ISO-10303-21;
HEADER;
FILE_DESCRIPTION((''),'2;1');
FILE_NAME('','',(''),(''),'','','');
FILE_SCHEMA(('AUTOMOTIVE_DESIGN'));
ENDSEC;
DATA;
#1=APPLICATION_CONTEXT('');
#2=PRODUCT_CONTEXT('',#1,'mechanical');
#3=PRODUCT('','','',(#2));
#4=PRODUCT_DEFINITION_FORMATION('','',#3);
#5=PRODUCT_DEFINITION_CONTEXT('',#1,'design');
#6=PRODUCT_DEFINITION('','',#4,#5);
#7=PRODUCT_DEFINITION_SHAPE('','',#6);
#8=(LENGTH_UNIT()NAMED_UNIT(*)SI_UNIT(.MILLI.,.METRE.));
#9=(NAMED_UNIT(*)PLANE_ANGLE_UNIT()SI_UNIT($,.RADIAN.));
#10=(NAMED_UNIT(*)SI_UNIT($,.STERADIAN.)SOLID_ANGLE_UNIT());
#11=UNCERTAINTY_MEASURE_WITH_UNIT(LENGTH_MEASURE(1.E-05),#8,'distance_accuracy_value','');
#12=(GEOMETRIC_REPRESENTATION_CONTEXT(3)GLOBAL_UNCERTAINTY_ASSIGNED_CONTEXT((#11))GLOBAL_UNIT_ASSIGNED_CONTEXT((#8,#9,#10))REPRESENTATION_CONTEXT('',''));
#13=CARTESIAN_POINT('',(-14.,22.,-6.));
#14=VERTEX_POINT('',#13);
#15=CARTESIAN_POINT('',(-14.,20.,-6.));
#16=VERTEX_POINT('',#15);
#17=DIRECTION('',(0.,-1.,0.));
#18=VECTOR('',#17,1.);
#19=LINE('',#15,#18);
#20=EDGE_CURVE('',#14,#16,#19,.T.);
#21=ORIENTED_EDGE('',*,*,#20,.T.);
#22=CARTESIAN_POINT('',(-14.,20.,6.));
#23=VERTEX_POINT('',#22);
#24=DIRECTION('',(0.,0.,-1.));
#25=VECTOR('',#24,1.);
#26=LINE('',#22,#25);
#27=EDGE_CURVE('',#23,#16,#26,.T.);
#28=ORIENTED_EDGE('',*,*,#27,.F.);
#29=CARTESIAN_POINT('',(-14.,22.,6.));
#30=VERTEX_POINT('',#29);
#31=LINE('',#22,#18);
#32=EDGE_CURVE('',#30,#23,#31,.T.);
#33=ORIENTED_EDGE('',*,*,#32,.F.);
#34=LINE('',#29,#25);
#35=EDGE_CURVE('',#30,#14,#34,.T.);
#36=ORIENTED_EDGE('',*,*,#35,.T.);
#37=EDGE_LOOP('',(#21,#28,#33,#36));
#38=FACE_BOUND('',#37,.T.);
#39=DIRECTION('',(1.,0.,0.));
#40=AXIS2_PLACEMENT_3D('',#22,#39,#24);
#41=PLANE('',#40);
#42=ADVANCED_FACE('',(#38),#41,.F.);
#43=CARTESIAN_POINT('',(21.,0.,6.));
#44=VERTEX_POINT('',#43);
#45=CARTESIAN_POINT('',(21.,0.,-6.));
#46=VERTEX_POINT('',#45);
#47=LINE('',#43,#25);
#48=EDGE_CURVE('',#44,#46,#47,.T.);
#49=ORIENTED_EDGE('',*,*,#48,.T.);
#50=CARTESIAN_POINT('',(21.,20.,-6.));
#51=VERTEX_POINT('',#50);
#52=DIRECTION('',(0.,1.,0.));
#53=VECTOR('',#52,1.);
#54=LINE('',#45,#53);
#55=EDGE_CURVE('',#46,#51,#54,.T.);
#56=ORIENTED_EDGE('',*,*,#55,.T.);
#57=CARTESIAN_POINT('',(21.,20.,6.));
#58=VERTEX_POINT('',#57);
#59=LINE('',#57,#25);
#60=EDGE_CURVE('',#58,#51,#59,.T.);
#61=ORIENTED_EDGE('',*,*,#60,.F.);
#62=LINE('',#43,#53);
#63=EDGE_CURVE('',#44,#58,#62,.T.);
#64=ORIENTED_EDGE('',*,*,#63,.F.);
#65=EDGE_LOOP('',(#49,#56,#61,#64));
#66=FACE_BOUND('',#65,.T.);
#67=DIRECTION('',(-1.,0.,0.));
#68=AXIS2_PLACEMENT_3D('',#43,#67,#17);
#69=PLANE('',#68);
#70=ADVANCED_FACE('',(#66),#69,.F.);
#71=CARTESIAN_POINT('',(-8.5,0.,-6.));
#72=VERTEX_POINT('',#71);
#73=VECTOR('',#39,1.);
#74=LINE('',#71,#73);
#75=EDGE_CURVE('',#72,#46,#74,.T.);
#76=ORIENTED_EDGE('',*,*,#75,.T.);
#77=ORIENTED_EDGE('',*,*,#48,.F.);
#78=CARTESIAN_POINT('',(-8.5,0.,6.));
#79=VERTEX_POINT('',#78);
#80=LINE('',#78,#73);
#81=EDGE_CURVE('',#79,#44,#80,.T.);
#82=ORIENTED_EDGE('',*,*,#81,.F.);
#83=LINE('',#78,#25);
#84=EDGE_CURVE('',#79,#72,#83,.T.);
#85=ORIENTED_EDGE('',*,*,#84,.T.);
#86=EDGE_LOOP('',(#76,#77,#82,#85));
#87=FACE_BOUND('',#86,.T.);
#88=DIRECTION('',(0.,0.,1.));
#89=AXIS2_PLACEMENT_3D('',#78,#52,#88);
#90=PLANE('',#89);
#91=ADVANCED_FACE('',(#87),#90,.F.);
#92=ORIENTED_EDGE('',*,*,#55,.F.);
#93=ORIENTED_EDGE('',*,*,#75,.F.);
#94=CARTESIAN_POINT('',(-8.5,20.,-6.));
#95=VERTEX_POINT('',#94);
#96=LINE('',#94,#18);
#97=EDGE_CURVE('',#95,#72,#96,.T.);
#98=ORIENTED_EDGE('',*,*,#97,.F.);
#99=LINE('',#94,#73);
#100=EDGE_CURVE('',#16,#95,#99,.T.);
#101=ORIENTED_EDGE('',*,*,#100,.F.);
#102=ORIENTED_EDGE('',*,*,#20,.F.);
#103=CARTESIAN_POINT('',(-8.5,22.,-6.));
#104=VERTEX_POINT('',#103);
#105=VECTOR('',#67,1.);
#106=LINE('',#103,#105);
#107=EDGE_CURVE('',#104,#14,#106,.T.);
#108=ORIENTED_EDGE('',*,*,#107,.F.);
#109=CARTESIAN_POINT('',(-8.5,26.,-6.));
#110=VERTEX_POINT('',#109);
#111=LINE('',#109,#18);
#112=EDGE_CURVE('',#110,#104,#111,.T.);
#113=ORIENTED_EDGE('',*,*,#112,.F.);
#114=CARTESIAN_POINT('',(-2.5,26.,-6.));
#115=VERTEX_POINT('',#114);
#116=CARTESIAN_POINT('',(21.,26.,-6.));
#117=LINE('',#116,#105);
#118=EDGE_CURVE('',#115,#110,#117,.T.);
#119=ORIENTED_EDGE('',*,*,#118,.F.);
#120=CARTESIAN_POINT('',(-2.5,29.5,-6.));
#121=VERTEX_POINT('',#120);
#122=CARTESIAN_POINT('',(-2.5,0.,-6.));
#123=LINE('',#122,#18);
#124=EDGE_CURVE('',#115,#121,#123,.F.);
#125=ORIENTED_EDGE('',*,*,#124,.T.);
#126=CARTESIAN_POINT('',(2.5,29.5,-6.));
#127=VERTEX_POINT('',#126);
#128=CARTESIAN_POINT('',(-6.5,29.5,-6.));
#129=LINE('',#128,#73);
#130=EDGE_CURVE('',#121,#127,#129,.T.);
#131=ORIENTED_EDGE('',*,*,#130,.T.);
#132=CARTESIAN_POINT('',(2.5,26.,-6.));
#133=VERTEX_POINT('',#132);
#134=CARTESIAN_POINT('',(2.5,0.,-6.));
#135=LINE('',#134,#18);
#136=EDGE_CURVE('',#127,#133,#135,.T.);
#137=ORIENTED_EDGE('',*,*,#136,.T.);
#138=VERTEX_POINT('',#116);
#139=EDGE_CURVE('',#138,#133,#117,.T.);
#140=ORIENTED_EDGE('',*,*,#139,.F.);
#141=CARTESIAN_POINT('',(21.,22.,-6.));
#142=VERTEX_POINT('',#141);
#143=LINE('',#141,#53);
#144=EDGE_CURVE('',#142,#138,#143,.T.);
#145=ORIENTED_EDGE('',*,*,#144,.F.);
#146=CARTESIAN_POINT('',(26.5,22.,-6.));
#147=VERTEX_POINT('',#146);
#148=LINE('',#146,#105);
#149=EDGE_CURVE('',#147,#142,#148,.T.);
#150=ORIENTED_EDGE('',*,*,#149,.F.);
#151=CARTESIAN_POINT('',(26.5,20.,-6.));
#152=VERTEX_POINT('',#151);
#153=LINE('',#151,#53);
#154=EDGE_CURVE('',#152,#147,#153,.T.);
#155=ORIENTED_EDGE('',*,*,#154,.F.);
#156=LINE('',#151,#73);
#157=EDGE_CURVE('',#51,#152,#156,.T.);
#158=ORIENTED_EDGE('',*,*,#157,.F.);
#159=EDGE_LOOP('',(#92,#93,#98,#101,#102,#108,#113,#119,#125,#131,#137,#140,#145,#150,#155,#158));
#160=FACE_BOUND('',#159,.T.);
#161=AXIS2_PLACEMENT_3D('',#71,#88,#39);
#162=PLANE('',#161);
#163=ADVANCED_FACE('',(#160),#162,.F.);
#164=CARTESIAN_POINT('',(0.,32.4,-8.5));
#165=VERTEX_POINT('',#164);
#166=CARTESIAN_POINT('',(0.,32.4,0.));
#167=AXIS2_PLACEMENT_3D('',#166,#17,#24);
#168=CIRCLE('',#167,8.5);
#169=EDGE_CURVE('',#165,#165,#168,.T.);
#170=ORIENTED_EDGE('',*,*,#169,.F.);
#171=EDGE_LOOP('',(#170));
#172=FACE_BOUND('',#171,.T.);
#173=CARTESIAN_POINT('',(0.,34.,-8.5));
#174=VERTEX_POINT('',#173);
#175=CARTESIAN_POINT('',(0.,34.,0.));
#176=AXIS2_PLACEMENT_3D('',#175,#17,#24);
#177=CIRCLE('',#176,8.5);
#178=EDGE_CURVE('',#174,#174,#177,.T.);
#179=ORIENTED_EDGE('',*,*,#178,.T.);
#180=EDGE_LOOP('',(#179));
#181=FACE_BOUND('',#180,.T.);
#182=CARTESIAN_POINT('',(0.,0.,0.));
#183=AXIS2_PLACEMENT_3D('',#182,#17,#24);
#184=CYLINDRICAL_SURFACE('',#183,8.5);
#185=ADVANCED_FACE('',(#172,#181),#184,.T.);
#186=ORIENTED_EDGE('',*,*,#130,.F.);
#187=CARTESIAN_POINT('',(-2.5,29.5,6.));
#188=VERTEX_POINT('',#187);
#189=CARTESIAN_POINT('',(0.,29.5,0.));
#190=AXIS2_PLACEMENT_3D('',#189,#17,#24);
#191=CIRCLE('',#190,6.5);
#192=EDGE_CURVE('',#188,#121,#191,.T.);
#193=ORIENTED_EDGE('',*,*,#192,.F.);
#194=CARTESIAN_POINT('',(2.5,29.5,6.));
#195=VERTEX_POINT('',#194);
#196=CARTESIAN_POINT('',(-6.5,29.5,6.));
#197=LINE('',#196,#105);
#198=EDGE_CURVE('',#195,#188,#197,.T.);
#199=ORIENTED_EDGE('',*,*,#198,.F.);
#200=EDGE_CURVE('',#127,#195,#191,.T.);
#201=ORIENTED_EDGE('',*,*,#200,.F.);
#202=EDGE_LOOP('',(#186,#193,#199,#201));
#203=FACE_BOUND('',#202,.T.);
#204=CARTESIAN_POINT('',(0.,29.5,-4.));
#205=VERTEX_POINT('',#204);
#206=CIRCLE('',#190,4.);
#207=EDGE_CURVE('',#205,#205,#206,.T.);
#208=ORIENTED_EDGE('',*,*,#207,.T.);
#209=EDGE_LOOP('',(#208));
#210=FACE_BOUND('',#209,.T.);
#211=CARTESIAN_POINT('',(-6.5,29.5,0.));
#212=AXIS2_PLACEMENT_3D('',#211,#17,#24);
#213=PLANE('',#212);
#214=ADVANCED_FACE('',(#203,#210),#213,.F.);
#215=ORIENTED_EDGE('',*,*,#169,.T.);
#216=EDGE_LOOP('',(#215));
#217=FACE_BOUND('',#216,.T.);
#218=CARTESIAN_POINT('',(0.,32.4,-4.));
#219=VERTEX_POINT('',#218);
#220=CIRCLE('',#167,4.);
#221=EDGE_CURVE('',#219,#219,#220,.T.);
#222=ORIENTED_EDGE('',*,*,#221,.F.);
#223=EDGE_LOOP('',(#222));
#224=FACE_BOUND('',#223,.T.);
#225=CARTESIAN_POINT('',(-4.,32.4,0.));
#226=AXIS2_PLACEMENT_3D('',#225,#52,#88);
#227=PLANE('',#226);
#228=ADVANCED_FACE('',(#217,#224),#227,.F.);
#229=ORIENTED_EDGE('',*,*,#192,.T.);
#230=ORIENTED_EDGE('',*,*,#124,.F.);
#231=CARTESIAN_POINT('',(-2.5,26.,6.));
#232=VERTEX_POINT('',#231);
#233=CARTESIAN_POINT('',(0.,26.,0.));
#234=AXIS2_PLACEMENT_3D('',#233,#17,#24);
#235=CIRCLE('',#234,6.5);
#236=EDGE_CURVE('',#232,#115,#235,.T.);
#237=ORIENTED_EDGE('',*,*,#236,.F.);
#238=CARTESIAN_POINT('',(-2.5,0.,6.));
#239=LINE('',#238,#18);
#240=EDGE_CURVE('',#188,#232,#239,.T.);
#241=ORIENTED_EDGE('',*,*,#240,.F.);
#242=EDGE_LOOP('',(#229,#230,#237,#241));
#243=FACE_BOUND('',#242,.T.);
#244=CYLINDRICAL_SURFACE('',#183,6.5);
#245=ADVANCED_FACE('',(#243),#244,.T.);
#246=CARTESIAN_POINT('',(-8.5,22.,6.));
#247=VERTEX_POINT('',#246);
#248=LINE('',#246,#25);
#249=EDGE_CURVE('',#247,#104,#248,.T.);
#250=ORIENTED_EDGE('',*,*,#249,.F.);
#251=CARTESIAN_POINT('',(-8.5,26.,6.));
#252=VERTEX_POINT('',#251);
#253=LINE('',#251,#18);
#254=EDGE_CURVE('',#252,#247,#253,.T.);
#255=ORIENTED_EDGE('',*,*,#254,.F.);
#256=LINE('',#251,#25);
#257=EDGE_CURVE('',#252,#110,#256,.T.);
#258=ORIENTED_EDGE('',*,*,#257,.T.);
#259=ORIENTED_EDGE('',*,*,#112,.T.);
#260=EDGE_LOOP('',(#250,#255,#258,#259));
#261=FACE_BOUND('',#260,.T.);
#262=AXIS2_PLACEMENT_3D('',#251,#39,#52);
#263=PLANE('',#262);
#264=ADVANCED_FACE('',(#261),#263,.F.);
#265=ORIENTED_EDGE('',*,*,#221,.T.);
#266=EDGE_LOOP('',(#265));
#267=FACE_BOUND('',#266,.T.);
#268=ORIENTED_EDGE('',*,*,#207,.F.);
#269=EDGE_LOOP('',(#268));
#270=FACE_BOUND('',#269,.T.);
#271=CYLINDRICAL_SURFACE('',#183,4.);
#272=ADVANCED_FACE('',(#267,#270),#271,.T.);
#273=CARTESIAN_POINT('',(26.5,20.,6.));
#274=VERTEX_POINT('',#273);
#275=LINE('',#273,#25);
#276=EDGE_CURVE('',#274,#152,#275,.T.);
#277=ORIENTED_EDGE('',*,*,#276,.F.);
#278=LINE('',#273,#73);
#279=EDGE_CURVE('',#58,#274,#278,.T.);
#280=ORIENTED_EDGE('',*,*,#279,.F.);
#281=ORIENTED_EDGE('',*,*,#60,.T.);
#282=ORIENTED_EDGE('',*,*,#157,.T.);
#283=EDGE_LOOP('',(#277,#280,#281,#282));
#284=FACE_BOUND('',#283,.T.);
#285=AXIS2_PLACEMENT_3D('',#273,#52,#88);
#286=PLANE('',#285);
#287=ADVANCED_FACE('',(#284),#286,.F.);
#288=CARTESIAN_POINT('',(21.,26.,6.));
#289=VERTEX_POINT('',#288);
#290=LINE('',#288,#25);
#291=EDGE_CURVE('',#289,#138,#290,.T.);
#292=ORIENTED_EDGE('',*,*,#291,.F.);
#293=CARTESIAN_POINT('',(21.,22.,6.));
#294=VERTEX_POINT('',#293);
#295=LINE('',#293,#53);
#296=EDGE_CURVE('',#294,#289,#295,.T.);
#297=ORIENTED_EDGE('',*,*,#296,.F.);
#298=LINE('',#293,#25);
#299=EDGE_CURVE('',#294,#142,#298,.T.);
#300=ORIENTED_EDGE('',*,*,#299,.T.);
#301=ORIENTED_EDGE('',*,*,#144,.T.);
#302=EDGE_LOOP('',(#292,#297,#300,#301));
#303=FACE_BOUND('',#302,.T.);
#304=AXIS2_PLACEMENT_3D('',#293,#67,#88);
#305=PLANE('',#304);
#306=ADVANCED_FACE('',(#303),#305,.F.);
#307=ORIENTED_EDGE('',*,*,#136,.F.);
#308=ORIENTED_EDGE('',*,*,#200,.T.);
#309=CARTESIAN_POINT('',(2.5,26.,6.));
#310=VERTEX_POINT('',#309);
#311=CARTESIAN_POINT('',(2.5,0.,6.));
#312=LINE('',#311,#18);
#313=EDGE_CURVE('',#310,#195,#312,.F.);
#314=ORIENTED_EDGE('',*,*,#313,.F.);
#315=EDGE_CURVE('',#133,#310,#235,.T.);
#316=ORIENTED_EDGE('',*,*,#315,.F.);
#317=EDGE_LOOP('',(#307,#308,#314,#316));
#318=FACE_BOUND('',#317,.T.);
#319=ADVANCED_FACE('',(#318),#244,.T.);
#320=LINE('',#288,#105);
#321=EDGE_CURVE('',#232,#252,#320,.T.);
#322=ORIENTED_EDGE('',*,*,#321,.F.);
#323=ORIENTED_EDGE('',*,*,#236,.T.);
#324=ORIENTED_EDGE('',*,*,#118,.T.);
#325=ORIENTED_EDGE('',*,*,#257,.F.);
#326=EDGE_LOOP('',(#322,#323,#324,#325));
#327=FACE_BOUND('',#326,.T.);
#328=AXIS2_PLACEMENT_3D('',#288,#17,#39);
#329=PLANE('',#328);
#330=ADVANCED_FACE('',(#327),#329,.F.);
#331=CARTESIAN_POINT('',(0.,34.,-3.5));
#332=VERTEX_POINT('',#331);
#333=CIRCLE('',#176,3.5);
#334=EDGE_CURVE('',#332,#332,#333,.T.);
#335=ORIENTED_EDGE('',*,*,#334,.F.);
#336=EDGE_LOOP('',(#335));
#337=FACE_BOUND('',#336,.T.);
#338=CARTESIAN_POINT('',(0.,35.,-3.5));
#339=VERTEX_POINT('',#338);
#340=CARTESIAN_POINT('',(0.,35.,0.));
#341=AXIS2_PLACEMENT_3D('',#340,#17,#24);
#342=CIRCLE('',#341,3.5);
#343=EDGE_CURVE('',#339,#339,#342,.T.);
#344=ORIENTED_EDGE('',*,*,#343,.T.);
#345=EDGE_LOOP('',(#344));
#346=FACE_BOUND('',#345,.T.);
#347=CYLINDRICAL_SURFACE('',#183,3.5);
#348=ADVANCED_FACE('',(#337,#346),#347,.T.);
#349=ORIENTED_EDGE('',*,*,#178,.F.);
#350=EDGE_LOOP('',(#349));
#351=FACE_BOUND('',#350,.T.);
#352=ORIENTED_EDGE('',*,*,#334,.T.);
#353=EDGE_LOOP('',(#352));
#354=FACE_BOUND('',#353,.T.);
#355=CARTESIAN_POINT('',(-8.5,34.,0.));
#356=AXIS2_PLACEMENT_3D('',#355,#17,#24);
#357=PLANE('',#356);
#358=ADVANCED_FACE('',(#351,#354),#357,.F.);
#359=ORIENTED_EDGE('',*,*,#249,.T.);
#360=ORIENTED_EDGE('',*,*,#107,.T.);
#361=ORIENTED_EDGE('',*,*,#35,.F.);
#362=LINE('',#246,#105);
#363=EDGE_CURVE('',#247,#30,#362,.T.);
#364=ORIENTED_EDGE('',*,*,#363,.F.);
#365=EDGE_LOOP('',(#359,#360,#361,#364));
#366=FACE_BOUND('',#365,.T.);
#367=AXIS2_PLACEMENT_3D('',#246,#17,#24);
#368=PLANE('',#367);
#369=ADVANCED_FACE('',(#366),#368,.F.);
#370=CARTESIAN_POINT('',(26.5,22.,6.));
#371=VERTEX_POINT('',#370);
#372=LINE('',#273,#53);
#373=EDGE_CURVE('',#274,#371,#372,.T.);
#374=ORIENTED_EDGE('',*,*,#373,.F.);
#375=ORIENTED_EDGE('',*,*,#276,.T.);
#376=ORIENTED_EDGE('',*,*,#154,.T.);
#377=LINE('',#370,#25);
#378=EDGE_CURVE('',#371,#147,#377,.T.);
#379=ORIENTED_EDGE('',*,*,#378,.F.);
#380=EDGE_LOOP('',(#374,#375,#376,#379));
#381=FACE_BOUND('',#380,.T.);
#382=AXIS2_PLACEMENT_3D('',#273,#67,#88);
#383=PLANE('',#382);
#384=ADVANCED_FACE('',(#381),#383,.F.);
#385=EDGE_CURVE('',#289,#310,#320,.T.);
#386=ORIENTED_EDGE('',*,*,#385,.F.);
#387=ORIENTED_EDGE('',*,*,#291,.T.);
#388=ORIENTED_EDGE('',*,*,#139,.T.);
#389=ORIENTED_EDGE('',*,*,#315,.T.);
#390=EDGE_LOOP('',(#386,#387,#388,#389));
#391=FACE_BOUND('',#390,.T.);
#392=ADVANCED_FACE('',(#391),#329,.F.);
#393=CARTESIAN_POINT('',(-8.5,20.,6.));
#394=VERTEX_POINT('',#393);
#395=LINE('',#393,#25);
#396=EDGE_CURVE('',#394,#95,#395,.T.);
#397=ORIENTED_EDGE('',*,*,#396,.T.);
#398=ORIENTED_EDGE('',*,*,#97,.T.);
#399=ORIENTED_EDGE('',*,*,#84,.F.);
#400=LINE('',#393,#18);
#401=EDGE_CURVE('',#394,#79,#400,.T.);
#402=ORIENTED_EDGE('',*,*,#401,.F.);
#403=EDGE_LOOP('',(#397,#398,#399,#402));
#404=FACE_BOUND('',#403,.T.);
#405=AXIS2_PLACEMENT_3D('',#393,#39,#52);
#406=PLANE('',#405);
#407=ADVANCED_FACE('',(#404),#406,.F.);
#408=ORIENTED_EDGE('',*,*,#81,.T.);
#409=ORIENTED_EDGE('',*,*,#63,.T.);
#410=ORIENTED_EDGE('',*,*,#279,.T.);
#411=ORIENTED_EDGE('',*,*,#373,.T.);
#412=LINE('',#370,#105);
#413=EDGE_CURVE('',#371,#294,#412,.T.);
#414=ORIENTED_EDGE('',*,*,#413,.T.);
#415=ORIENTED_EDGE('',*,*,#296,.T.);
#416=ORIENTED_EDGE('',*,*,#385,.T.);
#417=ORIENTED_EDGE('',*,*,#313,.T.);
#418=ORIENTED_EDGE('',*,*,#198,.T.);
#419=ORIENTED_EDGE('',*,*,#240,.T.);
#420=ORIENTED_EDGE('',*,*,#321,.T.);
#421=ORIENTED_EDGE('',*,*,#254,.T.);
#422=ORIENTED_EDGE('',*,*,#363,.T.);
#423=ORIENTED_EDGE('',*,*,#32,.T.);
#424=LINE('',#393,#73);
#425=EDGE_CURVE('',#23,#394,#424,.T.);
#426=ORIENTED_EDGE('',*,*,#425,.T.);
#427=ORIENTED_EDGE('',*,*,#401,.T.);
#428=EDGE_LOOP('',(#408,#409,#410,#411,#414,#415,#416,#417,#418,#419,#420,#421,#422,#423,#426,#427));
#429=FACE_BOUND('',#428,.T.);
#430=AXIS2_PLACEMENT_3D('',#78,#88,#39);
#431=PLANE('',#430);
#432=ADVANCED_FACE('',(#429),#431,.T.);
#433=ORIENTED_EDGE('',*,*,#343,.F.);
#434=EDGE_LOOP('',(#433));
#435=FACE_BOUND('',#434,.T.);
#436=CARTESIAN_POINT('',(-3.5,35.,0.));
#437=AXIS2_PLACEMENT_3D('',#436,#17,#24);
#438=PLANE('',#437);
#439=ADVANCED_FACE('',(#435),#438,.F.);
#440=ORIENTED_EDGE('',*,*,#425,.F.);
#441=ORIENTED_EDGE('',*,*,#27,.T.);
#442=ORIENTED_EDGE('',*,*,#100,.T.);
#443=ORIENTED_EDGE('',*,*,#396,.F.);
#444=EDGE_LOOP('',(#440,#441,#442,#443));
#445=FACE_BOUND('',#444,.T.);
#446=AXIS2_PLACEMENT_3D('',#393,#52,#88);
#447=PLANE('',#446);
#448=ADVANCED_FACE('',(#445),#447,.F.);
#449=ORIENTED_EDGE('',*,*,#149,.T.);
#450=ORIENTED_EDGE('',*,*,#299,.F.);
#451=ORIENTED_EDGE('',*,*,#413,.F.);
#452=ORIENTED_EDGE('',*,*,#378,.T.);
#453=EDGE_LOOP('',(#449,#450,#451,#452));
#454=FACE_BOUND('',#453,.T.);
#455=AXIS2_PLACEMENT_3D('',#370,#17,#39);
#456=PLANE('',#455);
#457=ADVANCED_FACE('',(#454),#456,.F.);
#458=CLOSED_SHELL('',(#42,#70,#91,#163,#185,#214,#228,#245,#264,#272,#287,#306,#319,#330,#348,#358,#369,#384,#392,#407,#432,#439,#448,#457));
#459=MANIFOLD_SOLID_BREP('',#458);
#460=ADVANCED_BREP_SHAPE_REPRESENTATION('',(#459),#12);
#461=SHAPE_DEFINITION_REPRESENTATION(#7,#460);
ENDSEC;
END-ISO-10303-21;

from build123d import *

# Parameters (mm, degrees)
VYSUNOUT1_DEPTH          = 6
ODEBRAT_START            = -29.5
ODEBRAT_VYSUNUT_M2_DEPTH = 3.5


# Read off the part's stored shape, not the designer's step: Odebrat vysunutím2
with BuildPart() as part:
    # Skica1 → Vysunout1 (new, symmetric)
    with BuildSketch(Plane.XY):
        Polygon((-8.5, 0), (21, 0), (21, 20), (26.5, 20), (26.5, 22), (21, 22), (21, 26), (-8.5, 26), (-8.5, 22), (-14, 22), (-14, 20), (-8.5, 20), align=None)
    extrude(amount=VYSUNOUT1_DEPTH, both=True)

    # Skica2 → Rotovat1 (revolve)
    with BuildSketch(Plane.XY, mode=Mode.PRIVATE) as rotovat1_sk:
        Polygon((-6.5, 26), (-6.5, 29.5), (-4, 29.5), (-4, 32.4), (-8.5, 32.4), (-8.5, 34), (-3.5, 34), (-3.5, 35), (0, 35), (0, 26), align=None)
    revolve(rotovat1_sk.sketch.rotate(Axis((0, 0, 0), (0, 1, 0)), 270), axis=Axis((0, 0, 0), (0, 1, 0)))

    # Odebrat vysunutím2 outline → Odebrat vysunutím2 (cut)
    with BuildSketch(Plane.XZ.offset(ODEBRAT_START)):
        with BuildLine():
            Line((-2.5, 6), (2.5, 6))
            ThreePointArc((2.5, 6), (0, 6.5), (-2.5, 6))
        make_face()
        with BuildLine():
            Line((2.5, -6), (-2.5, -6))
            ThreePointArc((-2.5, -6), (0, -6.5), (2.5, -6))
        make_face()
    extrude(amount=ODEBRAT_VYSUNUT_M2_DEPTH, mode=Mode.SUBTRACT)


solid = part.part
